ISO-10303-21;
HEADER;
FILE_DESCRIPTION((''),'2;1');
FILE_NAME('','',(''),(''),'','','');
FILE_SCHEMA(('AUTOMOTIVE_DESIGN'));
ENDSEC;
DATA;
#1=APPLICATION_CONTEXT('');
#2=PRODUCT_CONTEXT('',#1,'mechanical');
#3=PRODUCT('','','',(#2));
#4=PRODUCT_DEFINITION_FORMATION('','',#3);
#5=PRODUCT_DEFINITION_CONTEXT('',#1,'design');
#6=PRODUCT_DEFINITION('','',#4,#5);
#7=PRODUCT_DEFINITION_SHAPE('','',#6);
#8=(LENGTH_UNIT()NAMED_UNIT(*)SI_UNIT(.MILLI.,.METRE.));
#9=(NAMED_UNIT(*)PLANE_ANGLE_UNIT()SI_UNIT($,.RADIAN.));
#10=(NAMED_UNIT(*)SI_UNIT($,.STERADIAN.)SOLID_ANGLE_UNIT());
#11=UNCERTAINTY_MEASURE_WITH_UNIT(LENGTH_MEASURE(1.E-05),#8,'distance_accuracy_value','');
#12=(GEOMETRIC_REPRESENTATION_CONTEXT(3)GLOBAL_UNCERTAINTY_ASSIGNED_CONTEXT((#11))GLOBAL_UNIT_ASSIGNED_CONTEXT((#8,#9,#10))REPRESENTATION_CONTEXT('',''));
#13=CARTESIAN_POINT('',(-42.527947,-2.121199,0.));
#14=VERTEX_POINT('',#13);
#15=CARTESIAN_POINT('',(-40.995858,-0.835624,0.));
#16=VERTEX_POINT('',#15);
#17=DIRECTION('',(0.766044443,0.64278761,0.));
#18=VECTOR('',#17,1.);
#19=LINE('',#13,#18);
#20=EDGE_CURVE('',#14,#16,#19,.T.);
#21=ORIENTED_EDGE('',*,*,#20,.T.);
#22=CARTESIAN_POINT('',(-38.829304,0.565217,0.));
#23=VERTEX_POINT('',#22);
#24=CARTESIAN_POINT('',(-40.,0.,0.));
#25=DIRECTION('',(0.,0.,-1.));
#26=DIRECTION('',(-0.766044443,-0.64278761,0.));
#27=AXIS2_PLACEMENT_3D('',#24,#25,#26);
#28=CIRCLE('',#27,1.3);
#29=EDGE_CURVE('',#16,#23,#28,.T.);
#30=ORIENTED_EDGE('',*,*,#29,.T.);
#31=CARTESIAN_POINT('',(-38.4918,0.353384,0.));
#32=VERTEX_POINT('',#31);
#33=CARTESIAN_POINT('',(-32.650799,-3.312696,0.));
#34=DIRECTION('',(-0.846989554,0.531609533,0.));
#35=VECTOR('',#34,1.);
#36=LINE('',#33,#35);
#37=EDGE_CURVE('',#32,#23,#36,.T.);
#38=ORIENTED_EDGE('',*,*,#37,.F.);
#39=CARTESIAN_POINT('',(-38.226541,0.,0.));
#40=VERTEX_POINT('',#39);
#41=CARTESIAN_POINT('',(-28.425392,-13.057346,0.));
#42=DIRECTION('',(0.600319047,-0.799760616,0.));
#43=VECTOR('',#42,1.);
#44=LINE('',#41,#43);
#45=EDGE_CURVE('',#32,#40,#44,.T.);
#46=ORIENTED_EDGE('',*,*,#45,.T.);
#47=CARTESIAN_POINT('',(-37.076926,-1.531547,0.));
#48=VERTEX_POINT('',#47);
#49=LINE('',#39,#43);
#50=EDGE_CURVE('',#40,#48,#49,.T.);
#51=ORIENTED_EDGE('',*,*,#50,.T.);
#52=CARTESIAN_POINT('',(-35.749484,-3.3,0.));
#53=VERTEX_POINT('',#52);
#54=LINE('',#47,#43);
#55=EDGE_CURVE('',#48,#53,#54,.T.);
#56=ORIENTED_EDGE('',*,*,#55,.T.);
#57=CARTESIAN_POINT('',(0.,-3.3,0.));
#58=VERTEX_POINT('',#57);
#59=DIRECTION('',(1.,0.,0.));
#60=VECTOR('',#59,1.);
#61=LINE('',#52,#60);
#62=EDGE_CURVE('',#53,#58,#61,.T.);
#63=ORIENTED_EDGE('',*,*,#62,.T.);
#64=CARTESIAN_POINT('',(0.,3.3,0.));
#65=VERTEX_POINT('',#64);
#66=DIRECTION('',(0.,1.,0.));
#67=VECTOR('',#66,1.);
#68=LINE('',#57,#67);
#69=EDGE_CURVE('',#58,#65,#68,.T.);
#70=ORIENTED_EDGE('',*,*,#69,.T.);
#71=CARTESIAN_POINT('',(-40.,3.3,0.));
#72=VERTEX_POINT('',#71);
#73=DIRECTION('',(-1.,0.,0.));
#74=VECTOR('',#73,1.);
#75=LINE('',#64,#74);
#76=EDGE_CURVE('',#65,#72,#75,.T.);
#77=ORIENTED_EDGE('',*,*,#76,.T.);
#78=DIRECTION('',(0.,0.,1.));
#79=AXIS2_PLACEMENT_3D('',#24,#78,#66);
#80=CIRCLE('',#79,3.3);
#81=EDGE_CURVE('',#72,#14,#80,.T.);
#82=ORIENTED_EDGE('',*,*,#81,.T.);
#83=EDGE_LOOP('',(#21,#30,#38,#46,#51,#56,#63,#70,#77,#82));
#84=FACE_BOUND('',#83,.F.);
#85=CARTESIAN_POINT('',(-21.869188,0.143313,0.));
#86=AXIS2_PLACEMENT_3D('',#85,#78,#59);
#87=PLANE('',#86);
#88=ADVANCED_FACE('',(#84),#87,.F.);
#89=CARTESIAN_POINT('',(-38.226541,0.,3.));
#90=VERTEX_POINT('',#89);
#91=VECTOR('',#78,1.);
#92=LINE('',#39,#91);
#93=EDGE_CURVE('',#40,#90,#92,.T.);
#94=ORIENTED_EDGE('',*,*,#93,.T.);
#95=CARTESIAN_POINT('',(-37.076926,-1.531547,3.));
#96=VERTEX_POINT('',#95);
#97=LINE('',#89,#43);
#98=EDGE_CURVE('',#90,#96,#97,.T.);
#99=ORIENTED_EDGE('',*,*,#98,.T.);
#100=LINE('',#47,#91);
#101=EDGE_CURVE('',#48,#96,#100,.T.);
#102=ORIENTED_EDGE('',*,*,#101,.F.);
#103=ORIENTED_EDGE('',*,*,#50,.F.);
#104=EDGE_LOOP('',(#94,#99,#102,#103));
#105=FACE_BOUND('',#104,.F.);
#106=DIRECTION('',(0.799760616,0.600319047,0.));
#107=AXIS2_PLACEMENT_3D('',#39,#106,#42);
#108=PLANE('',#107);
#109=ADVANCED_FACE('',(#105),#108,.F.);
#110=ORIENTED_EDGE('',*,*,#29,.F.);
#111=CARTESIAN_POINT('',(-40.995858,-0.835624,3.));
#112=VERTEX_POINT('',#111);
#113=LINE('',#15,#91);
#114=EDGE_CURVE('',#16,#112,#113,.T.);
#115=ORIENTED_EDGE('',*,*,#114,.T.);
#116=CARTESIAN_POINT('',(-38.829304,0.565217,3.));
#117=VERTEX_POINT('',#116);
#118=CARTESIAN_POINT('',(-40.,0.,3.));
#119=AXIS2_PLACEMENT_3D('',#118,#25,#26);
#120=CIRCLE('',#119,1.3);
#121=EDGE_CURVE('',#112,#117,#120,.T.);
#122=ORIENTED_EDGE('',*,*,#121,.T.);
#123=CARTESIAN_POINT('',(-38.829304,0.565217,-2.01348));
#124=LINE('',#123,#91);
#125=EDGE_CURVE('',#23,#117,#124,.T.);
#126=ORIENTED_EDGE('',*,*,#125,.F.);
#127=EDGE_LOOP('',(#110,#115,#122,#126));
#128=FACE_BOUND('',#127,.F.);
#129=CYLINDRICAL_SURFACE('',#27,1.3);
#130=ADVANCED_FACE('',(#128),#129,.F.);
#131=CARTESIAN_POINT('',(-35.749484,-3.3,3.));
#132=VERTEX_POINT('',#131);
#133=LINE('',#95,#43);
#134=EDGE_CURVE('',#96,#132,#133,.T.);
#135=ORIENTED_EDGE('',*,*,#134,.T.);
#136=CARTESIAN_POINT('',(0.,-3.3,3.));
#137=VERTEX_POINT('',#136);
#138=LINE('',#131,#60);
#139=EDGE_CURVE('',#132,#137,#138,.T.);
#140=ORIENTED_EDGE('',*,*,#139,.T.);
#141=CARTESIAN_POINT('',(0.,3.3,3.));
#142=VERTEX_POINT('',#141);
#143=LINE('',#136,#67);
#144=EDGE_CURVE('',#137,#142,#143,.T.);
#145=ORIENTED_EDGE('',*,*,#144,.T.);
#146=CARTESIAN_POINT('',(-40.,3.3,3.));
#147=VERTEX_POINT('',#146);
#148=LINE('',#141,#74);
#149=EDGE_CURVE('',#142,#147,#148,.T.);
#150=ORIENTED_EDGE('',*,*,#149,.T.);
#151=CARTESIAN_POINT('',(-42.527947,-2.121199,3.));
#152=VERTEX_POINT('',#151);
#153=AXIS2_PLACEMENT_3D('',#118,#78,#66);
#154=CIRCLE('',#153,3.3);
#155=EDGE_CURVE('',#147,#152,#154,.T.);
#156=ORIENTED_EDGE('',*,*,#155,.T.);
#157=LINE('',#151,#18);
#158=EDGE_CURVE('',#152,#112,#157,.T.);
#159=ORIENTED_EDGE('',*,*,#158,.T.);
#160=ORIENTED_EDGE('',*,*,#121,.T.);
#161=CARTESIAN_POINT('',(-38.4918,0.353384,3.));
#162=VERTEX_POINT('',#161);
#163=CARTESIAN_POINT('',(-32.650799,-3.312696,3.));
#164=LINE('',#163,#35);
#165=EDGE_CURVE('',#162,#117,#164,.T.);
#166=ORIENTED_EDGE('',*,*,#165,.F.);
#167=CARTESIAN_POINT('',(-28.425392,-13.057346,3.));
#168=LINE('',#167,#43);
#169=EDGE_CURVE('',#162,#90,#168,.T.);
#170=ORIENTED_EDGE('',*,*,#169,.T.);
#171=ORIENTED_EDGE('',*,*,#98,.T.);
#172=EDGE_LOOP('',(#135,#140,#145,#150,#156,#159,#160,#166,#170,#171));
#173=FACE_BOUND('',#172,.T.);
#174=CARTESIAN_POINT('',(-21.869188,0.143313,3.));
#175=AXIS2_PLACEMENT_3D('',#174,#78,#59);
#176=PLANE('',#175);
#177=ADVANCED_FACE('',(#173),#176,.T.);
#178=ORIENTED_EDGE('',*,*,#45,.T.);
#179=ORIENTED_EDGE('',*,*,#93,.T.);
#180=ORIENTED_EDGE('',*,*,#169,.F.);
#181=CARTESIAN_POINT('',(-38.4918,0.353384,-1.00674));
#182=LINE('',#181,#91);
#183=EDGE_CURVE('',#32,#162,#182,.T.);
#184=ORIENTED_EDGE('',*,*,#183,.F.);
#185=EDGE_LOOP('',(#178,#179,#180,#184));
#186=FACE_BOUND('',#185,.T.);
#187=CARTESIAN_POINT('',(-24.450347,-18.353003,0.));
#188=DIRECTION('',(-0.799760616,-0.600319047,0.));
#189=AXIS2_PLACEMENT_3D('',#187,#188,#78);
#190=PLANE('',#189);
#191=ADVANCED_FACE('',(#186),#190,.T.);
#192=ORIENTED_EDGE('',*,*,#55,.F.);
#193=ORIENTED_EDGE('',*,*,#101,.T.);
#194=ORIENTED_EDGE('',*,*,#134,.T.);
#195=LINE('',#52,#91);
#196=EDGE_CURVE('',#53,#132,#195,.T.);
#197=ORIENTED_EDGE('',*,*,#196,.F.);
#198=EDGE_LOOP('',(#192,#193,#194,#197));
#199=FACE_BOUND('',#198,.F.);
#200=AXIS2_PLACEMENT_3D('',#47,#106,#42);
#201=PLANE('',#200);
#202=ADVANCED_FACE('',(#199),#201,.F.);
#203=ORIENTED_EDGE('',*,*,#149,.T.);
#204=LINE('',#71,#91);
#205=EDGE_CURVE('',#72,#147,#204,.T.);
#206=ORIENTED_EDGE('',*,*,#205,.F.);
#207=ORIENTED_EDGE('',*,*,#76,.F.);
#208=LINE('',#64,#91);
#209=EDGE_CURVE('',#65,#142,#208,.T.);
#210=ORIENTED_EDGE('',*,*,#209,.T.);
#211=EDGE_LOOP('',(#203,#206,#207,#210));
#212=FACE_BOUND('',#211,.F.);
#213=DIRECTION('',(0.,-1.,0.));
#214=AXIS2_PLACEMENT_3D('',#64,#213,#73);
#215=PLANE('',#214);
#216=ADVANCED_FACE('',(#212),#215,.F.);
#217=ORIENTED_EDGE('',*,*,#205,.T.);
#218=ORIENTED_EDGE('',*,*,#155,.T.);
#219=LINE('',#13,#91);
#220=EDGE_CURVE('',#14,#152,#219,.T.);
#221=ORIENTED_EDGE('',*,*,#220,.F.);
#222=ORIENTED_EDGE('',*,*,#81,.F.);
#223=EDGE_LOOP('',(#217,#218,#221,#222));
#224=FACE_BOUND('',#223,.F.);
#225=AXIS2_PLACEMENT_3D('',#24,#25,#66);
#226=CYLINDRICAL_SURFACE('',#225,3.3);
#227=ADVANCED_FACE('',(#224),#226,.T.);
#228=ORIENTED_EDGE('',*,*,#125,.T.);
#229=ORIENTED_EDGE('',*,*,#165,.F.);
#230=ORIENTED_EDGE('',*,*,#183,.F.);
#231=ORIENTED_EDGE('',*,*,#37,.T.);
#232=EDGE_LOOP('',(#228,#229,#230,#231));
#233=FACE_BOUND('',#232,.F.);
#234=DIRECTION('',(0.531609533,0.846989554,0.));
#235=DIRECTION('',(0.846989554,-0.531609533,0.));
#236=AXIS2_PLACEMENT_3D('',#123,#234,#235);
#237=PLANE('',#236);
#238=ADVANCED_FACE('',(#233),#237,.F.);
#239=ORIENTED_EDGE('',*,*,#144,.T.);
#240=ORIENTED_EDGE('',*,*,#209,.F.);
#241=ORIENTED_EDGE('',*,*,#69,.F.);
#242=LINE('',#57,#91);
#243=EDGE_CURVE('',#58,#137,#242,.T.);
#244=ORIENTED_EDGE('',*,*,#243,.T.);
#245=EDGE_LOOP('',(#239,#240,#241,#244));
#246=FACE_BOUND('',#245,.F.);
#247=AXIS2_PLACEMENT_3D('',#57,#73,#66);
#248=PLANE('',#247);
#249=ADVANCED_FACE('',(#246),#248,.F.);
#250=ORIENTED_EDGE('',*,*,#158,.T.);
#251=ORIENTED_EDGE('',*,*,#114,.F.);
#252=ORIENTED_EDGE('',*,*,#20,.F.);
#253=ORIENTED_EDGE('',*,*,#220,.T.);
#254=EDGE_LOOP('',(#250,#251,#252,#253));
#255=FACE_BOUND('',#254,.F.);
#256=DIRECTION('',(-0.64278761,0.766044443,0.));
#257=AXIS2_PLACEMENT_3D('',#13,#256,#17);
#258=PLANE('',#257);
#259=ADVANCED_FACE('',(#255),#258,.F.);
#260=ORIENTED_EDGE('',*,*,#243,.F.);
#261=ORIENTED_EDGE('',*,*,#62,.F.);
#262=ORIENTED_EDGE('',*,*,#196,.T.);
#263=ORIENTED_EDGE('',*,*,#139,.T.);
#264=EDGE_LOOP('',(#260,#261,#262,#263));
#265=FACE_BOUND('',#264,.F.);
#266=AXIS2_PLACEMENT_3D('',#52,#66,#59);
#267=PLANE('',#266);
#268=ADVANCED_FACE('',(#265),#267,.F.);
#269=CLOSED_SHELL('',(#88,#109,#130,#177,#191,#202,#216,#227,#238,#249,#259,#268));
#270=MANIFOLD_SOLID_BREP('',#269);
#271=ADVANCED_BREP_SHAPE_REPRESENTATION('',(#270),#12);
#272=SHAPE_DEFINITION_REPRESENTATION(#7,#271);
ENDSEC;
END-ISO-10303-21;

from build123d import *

# Parameters (mm, degrees)
F1_DEPTH    = 3
F2_T4_DEPTH = 7.0269593276


# Not quite as in the source:
# - a fillet or chamfer that OpenCascade refuses, or shapes differently, is made with other operations: its cross-section is extruded or revolved along the edge and cut away or added


with BuildPart() as f1:
    # F0 (on Top) → F1 (new body)
    with BuildSketch(Plane.XY):
        with BuildLine():
            ThreePointArc((-40.9958577761, -0.8356238926), (-40.4446261863, 1.221600407), (-38.7, 0))
            Line((-38.7, 0), (-38.2265411317, 0))
            Line((-38.2265411317, 0), (-36.7, 0))
            ThreePointArc((-36.7, 0), (-36.7956166893, -0.7886238635), (-37.076925817, -1.5315473615))
            Line((-37.076925817, -1.5315473615), (-35.7494838536, -3.3))
            Line((-35.7494838536, -3.3), (0, -3.3))
            Line((0, -3.3), (0, 0))
            Line((0, 0), (0, 3.3))
            Line((0, 3.3), (-40, 3.3))
            ThreePointArc((-40, 3.3), (-42.9908156972, 1.3946402637), (-42.5279466623, -2.121199112))
            Line((-42.5279466623, -2.121199112), (-40.9958577761, -0.8356238926))
        make_face()
        with BuildLine():
            Line((-36.7, 0), (-38.2265411317, 0))
            Line((-38.2265411317, 0), (-37.076925817, -1.5315473615))
            ThreePointArc((-37.076925817, -1.5315473615), (-36.7956166893, -0.7886238635), (-36.7, 0))
        make_face()
    extrude(amount=F1_DEPTH)

    # F2: chamfer of 1 on 1 edges, made by hand


with BuildPart() as f2_tool2:
    # F2_s3 → F2_t4 (new body)
    with BuildSketch(Plane.XY.offset(-2.0134796638)):
        with BuildLine():
            Line((-38.8293039248, 0.5652173913), (-37.9287684823, 0))
            Line((-37.9287684823, 0), (-38.7, 0))
            ThreePointArc((-38.7, 0), (-38.7360904804, 0.3041919232), (-38.8293039248, 0.5652173913))
        make_face()
    extrude(amount=F2_T4_DEPTH)

    split(bisect_by=Plane(origin=(-24.4503471764, -18.3530031596, 0), x_dir=(0, 0, 1), z_dir=(-0.7997606156, -0.6003190466, 0)), keep=Keep.TOP)


with BuildPart() as f1_1:
    add(f1.part)

    # F2_t1: cut F2_tool2
    add(f2_tool2.part, mode=Mode.SUBTRACT)


solid = f1_1.part
